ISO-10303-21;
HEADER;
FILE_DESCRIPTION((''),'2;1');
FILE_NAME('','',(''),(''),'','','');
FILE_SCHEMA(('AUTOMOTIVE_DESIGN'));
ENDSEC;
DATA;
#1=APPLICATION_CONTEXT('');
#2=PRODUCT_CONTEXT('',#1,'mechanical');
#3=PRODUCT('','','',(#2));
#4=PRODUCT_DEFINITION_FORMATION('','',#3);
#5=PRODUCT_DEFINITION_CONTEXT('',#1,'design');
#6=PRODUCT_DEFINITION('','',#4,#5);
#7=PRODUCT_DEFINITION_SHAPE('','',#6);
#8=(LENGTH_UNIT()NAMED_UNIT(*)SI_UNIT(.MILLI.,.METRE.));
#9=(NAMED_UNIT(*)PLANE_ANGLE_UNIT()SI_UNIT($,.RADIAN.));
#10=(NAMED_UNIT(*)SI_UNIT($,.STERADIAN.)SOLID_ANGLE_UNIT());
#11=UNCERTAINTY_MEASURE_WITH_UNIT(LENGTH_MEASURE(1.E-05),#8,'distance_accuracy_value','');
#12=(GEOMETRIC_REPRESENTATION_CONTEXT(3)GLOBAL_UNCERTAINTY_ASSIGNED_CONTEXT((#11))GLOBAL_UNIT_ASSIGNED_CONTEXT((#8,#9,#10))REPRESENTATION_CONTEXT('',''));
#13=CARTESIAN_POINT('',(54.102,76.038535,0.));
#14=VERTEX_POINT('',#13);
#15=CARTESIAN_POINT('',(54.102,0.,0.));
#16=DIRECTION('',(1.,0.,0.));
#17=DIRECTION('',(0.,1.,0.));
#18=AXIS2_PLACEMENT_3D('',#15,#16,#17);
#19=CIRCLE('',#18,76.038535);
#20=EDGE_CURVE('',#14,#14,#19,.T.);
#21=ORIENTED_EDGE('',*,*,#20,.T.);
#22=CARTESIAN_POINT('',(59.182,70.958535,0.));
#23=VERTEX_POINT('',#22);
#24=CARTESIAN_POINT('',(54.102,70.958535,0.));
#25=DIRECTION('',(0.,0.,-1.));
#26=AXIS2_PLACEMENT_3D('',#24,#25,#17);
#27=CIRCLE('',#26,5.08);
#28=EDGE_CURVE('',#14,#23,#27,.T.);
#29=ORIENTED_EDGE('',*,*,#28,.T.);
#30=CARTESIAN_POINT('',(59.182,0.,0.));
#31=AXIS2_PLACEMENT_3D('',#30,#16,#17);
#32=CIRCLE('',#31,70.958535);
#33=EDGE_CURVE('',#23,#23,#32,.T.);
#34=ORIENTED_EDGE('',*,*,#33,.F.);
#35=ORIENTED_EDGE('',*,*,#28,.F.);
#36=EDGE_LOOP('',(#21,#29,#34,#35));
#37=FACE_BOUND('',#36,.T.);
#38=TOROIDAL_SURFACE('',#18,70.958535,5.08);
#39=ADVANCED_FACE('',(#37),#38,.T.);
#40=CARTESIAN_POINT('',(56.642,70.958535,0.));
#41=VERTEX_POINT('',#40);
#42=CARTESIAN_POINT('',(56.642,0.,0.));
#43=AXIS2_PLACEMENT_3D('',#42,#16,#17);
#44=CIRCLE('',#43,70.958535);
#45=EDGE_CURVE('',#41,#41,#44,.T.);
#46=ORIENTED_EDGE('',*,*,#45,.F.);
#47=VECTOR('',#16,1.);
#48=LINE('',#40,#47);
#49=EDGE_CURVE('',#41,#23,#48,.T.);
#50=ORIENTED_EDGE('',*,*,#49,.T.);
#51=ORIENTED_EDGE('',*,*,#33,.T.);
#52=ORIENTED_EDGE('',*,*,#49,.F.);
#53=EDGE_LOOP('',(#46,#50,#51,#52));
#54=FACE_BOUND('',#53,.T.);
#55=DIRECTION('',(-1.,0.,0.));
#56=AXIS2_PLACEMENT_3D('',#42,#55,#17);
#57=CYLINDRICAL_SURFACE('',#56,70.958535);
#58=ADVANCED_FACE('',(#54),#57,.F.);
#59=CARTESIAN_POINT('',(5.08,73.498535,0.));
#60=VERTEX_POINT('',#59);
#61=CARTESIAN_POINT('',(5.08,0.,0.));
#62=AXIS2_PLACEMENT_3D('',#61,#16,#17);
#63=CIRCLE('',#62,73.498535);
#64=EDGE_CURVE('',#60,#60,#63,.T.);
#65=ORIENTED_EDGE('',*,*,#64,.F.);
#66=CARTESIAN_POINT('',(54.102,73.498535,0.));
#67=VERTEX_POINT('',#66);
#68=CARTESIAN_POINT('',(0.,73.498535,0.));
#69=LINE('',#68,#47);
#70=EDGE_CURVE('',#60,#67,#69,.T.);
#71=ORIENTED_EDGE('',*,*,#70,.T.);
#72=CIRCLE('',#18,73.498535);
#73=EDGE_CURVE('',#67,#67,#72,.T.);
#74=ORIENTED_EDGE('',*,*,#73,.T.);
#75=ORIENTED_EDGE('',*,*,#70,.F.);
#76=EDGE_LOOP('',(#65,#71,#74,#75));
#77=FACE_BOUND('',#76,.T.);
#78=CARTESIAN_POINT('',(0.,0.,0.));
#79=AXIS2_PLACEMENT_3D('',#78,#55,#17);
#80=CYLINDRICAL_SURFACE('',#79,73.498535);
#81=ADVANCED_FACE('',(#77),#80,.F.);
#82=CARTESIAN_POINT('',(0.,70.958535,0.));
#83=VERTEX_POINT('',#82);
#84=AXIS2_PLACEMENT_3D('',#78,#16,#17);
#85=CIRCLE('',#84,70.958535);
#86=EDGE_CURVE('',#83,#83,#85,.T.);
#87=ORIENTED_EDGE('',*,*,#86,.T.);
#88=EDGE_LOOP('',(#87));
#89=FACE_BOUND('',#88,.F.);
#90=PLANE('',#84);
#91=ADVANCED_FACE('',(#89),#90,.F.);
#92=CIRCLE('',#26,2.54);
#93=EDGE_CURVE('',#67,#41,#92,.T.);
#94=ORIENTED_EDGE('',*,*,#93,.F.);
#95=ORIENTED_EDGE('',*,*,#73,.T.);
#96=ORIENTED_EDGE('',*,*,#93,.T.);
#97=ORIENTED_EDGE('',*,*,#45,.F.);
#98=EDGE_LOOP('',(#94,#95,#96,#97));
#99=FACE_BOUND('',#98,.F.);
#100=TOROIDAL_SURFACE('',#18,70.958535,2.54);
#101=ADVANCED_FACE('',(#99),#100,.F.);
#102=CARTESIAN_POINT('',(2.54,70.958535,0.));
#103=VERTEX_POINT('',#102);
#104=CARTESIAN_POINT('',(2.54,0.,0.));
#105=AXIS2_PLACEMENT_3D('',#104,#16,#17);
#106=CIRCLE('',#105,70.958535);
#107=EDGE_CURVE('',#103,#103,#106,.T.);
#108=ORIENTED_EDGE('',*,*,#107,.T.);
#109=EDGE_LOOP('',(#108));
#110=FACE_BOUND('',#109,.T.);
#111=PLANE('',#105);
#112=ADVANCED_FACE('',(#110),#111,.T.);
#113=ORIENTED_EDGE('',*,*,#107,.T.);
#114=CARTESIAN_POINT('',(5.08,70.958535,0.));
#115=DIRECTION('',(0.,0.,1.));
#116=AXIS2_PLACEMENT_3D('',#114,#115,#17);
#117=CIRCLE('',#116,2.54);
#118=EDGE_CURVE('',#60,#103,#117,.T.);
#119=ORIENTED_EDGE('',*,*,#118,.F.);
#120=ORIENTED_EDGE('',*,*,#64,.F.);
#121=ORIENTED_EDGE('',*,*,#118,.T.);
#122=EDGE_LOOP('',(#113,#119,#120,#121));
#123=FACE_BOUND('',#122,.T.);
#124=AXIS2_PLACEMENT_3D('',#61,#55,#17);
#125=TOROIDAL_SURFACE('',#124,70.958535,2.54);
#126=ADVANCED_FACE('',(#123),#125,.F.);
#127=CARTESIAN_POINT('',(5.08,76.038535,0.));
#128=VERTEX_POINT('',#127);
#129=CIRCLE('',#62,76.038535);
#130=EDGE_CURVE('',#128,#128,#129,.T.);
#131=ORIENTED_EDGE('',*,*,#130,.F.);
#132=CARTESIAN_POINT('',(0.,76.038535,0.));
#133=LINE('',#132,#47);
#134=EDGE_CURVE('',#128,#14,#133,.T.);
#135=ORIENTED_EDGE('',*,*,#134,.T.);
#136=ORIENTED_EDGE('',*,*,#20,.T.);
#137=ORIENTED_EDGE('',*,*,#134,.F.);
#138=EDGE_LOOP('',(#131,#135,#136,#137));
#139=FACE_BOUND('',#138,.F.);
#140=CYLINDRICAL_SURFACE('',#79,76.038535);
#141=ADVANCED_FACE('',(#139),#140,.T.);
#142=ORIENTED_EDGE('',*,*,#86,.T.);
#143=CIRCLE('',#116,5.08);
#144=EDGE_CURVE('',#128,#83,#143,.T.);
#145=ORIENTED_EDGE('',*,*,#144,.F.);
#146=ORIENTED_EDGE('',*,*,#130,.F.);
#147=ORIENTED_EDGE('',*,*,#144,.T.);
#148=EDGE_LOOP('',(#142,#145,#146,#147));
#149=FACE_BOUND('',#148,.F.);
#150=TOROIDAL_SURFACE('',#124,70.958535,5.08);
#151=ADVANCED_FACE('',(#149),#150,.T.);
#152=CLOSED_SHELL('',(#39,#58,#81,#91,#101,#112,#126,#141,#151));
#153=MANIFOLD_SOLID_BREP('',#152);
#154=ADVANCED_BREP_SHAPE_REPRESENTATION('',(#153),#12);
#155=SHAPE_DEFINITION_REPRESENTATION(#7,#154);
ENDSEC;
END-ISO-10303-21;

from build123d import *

# Parameters (mm, degrees)
F0_R     = 76.0385345631
F1_DEPTH = 59.182
F2_R     = 5.08
F3_R     = 5.08
F4_T     = -2.54


# Not quite as in the source:
# - a shell that OpenCascade refuses in one call is made with other operations: the cavity is built on its own and cut out


with BuildPart() as f1:
    # F0 (on Right) → F1 (new body)
    with BuildSketch(Plane.YZ):
        Circle(F0_R)
    extrude(amount=F1_DEPTH)

    # F2
    f2_edges = [f1.edges().sort_by_distance(p)[0] for p in [
        (59.182, -76.038535, 0),
    ]]
    fillet(f2_edges, radius=F2_R)

    # F3
    f3_edges = [f1.edges().sort_by_distance(p)[0] for p in [
        (0, -76.038535, 0),
    ]]
    fillet(f3_edges, radius=F3_R)

    # F4: a shell. OpenCascade refuses it in one call, so the cavity is built on its own and cut out:
    # the body offset inwards by the wall thickness, plus a prism from it out through each open face.
    f4_core = offset(f1.part, amount=F4_T, mode=Mode.PRIVATE)
    f4_exits = [f4_core.faces().sort_by_distance(p)[0] for p in [
        (56.642, 0, 0),
    ]]
    add(f4_core, mode=Mode.SUBTRACT)
    extrude(f4_exits, amount=-F4_T, mode=Mode.SUBTRACT)


solid = f1.part
